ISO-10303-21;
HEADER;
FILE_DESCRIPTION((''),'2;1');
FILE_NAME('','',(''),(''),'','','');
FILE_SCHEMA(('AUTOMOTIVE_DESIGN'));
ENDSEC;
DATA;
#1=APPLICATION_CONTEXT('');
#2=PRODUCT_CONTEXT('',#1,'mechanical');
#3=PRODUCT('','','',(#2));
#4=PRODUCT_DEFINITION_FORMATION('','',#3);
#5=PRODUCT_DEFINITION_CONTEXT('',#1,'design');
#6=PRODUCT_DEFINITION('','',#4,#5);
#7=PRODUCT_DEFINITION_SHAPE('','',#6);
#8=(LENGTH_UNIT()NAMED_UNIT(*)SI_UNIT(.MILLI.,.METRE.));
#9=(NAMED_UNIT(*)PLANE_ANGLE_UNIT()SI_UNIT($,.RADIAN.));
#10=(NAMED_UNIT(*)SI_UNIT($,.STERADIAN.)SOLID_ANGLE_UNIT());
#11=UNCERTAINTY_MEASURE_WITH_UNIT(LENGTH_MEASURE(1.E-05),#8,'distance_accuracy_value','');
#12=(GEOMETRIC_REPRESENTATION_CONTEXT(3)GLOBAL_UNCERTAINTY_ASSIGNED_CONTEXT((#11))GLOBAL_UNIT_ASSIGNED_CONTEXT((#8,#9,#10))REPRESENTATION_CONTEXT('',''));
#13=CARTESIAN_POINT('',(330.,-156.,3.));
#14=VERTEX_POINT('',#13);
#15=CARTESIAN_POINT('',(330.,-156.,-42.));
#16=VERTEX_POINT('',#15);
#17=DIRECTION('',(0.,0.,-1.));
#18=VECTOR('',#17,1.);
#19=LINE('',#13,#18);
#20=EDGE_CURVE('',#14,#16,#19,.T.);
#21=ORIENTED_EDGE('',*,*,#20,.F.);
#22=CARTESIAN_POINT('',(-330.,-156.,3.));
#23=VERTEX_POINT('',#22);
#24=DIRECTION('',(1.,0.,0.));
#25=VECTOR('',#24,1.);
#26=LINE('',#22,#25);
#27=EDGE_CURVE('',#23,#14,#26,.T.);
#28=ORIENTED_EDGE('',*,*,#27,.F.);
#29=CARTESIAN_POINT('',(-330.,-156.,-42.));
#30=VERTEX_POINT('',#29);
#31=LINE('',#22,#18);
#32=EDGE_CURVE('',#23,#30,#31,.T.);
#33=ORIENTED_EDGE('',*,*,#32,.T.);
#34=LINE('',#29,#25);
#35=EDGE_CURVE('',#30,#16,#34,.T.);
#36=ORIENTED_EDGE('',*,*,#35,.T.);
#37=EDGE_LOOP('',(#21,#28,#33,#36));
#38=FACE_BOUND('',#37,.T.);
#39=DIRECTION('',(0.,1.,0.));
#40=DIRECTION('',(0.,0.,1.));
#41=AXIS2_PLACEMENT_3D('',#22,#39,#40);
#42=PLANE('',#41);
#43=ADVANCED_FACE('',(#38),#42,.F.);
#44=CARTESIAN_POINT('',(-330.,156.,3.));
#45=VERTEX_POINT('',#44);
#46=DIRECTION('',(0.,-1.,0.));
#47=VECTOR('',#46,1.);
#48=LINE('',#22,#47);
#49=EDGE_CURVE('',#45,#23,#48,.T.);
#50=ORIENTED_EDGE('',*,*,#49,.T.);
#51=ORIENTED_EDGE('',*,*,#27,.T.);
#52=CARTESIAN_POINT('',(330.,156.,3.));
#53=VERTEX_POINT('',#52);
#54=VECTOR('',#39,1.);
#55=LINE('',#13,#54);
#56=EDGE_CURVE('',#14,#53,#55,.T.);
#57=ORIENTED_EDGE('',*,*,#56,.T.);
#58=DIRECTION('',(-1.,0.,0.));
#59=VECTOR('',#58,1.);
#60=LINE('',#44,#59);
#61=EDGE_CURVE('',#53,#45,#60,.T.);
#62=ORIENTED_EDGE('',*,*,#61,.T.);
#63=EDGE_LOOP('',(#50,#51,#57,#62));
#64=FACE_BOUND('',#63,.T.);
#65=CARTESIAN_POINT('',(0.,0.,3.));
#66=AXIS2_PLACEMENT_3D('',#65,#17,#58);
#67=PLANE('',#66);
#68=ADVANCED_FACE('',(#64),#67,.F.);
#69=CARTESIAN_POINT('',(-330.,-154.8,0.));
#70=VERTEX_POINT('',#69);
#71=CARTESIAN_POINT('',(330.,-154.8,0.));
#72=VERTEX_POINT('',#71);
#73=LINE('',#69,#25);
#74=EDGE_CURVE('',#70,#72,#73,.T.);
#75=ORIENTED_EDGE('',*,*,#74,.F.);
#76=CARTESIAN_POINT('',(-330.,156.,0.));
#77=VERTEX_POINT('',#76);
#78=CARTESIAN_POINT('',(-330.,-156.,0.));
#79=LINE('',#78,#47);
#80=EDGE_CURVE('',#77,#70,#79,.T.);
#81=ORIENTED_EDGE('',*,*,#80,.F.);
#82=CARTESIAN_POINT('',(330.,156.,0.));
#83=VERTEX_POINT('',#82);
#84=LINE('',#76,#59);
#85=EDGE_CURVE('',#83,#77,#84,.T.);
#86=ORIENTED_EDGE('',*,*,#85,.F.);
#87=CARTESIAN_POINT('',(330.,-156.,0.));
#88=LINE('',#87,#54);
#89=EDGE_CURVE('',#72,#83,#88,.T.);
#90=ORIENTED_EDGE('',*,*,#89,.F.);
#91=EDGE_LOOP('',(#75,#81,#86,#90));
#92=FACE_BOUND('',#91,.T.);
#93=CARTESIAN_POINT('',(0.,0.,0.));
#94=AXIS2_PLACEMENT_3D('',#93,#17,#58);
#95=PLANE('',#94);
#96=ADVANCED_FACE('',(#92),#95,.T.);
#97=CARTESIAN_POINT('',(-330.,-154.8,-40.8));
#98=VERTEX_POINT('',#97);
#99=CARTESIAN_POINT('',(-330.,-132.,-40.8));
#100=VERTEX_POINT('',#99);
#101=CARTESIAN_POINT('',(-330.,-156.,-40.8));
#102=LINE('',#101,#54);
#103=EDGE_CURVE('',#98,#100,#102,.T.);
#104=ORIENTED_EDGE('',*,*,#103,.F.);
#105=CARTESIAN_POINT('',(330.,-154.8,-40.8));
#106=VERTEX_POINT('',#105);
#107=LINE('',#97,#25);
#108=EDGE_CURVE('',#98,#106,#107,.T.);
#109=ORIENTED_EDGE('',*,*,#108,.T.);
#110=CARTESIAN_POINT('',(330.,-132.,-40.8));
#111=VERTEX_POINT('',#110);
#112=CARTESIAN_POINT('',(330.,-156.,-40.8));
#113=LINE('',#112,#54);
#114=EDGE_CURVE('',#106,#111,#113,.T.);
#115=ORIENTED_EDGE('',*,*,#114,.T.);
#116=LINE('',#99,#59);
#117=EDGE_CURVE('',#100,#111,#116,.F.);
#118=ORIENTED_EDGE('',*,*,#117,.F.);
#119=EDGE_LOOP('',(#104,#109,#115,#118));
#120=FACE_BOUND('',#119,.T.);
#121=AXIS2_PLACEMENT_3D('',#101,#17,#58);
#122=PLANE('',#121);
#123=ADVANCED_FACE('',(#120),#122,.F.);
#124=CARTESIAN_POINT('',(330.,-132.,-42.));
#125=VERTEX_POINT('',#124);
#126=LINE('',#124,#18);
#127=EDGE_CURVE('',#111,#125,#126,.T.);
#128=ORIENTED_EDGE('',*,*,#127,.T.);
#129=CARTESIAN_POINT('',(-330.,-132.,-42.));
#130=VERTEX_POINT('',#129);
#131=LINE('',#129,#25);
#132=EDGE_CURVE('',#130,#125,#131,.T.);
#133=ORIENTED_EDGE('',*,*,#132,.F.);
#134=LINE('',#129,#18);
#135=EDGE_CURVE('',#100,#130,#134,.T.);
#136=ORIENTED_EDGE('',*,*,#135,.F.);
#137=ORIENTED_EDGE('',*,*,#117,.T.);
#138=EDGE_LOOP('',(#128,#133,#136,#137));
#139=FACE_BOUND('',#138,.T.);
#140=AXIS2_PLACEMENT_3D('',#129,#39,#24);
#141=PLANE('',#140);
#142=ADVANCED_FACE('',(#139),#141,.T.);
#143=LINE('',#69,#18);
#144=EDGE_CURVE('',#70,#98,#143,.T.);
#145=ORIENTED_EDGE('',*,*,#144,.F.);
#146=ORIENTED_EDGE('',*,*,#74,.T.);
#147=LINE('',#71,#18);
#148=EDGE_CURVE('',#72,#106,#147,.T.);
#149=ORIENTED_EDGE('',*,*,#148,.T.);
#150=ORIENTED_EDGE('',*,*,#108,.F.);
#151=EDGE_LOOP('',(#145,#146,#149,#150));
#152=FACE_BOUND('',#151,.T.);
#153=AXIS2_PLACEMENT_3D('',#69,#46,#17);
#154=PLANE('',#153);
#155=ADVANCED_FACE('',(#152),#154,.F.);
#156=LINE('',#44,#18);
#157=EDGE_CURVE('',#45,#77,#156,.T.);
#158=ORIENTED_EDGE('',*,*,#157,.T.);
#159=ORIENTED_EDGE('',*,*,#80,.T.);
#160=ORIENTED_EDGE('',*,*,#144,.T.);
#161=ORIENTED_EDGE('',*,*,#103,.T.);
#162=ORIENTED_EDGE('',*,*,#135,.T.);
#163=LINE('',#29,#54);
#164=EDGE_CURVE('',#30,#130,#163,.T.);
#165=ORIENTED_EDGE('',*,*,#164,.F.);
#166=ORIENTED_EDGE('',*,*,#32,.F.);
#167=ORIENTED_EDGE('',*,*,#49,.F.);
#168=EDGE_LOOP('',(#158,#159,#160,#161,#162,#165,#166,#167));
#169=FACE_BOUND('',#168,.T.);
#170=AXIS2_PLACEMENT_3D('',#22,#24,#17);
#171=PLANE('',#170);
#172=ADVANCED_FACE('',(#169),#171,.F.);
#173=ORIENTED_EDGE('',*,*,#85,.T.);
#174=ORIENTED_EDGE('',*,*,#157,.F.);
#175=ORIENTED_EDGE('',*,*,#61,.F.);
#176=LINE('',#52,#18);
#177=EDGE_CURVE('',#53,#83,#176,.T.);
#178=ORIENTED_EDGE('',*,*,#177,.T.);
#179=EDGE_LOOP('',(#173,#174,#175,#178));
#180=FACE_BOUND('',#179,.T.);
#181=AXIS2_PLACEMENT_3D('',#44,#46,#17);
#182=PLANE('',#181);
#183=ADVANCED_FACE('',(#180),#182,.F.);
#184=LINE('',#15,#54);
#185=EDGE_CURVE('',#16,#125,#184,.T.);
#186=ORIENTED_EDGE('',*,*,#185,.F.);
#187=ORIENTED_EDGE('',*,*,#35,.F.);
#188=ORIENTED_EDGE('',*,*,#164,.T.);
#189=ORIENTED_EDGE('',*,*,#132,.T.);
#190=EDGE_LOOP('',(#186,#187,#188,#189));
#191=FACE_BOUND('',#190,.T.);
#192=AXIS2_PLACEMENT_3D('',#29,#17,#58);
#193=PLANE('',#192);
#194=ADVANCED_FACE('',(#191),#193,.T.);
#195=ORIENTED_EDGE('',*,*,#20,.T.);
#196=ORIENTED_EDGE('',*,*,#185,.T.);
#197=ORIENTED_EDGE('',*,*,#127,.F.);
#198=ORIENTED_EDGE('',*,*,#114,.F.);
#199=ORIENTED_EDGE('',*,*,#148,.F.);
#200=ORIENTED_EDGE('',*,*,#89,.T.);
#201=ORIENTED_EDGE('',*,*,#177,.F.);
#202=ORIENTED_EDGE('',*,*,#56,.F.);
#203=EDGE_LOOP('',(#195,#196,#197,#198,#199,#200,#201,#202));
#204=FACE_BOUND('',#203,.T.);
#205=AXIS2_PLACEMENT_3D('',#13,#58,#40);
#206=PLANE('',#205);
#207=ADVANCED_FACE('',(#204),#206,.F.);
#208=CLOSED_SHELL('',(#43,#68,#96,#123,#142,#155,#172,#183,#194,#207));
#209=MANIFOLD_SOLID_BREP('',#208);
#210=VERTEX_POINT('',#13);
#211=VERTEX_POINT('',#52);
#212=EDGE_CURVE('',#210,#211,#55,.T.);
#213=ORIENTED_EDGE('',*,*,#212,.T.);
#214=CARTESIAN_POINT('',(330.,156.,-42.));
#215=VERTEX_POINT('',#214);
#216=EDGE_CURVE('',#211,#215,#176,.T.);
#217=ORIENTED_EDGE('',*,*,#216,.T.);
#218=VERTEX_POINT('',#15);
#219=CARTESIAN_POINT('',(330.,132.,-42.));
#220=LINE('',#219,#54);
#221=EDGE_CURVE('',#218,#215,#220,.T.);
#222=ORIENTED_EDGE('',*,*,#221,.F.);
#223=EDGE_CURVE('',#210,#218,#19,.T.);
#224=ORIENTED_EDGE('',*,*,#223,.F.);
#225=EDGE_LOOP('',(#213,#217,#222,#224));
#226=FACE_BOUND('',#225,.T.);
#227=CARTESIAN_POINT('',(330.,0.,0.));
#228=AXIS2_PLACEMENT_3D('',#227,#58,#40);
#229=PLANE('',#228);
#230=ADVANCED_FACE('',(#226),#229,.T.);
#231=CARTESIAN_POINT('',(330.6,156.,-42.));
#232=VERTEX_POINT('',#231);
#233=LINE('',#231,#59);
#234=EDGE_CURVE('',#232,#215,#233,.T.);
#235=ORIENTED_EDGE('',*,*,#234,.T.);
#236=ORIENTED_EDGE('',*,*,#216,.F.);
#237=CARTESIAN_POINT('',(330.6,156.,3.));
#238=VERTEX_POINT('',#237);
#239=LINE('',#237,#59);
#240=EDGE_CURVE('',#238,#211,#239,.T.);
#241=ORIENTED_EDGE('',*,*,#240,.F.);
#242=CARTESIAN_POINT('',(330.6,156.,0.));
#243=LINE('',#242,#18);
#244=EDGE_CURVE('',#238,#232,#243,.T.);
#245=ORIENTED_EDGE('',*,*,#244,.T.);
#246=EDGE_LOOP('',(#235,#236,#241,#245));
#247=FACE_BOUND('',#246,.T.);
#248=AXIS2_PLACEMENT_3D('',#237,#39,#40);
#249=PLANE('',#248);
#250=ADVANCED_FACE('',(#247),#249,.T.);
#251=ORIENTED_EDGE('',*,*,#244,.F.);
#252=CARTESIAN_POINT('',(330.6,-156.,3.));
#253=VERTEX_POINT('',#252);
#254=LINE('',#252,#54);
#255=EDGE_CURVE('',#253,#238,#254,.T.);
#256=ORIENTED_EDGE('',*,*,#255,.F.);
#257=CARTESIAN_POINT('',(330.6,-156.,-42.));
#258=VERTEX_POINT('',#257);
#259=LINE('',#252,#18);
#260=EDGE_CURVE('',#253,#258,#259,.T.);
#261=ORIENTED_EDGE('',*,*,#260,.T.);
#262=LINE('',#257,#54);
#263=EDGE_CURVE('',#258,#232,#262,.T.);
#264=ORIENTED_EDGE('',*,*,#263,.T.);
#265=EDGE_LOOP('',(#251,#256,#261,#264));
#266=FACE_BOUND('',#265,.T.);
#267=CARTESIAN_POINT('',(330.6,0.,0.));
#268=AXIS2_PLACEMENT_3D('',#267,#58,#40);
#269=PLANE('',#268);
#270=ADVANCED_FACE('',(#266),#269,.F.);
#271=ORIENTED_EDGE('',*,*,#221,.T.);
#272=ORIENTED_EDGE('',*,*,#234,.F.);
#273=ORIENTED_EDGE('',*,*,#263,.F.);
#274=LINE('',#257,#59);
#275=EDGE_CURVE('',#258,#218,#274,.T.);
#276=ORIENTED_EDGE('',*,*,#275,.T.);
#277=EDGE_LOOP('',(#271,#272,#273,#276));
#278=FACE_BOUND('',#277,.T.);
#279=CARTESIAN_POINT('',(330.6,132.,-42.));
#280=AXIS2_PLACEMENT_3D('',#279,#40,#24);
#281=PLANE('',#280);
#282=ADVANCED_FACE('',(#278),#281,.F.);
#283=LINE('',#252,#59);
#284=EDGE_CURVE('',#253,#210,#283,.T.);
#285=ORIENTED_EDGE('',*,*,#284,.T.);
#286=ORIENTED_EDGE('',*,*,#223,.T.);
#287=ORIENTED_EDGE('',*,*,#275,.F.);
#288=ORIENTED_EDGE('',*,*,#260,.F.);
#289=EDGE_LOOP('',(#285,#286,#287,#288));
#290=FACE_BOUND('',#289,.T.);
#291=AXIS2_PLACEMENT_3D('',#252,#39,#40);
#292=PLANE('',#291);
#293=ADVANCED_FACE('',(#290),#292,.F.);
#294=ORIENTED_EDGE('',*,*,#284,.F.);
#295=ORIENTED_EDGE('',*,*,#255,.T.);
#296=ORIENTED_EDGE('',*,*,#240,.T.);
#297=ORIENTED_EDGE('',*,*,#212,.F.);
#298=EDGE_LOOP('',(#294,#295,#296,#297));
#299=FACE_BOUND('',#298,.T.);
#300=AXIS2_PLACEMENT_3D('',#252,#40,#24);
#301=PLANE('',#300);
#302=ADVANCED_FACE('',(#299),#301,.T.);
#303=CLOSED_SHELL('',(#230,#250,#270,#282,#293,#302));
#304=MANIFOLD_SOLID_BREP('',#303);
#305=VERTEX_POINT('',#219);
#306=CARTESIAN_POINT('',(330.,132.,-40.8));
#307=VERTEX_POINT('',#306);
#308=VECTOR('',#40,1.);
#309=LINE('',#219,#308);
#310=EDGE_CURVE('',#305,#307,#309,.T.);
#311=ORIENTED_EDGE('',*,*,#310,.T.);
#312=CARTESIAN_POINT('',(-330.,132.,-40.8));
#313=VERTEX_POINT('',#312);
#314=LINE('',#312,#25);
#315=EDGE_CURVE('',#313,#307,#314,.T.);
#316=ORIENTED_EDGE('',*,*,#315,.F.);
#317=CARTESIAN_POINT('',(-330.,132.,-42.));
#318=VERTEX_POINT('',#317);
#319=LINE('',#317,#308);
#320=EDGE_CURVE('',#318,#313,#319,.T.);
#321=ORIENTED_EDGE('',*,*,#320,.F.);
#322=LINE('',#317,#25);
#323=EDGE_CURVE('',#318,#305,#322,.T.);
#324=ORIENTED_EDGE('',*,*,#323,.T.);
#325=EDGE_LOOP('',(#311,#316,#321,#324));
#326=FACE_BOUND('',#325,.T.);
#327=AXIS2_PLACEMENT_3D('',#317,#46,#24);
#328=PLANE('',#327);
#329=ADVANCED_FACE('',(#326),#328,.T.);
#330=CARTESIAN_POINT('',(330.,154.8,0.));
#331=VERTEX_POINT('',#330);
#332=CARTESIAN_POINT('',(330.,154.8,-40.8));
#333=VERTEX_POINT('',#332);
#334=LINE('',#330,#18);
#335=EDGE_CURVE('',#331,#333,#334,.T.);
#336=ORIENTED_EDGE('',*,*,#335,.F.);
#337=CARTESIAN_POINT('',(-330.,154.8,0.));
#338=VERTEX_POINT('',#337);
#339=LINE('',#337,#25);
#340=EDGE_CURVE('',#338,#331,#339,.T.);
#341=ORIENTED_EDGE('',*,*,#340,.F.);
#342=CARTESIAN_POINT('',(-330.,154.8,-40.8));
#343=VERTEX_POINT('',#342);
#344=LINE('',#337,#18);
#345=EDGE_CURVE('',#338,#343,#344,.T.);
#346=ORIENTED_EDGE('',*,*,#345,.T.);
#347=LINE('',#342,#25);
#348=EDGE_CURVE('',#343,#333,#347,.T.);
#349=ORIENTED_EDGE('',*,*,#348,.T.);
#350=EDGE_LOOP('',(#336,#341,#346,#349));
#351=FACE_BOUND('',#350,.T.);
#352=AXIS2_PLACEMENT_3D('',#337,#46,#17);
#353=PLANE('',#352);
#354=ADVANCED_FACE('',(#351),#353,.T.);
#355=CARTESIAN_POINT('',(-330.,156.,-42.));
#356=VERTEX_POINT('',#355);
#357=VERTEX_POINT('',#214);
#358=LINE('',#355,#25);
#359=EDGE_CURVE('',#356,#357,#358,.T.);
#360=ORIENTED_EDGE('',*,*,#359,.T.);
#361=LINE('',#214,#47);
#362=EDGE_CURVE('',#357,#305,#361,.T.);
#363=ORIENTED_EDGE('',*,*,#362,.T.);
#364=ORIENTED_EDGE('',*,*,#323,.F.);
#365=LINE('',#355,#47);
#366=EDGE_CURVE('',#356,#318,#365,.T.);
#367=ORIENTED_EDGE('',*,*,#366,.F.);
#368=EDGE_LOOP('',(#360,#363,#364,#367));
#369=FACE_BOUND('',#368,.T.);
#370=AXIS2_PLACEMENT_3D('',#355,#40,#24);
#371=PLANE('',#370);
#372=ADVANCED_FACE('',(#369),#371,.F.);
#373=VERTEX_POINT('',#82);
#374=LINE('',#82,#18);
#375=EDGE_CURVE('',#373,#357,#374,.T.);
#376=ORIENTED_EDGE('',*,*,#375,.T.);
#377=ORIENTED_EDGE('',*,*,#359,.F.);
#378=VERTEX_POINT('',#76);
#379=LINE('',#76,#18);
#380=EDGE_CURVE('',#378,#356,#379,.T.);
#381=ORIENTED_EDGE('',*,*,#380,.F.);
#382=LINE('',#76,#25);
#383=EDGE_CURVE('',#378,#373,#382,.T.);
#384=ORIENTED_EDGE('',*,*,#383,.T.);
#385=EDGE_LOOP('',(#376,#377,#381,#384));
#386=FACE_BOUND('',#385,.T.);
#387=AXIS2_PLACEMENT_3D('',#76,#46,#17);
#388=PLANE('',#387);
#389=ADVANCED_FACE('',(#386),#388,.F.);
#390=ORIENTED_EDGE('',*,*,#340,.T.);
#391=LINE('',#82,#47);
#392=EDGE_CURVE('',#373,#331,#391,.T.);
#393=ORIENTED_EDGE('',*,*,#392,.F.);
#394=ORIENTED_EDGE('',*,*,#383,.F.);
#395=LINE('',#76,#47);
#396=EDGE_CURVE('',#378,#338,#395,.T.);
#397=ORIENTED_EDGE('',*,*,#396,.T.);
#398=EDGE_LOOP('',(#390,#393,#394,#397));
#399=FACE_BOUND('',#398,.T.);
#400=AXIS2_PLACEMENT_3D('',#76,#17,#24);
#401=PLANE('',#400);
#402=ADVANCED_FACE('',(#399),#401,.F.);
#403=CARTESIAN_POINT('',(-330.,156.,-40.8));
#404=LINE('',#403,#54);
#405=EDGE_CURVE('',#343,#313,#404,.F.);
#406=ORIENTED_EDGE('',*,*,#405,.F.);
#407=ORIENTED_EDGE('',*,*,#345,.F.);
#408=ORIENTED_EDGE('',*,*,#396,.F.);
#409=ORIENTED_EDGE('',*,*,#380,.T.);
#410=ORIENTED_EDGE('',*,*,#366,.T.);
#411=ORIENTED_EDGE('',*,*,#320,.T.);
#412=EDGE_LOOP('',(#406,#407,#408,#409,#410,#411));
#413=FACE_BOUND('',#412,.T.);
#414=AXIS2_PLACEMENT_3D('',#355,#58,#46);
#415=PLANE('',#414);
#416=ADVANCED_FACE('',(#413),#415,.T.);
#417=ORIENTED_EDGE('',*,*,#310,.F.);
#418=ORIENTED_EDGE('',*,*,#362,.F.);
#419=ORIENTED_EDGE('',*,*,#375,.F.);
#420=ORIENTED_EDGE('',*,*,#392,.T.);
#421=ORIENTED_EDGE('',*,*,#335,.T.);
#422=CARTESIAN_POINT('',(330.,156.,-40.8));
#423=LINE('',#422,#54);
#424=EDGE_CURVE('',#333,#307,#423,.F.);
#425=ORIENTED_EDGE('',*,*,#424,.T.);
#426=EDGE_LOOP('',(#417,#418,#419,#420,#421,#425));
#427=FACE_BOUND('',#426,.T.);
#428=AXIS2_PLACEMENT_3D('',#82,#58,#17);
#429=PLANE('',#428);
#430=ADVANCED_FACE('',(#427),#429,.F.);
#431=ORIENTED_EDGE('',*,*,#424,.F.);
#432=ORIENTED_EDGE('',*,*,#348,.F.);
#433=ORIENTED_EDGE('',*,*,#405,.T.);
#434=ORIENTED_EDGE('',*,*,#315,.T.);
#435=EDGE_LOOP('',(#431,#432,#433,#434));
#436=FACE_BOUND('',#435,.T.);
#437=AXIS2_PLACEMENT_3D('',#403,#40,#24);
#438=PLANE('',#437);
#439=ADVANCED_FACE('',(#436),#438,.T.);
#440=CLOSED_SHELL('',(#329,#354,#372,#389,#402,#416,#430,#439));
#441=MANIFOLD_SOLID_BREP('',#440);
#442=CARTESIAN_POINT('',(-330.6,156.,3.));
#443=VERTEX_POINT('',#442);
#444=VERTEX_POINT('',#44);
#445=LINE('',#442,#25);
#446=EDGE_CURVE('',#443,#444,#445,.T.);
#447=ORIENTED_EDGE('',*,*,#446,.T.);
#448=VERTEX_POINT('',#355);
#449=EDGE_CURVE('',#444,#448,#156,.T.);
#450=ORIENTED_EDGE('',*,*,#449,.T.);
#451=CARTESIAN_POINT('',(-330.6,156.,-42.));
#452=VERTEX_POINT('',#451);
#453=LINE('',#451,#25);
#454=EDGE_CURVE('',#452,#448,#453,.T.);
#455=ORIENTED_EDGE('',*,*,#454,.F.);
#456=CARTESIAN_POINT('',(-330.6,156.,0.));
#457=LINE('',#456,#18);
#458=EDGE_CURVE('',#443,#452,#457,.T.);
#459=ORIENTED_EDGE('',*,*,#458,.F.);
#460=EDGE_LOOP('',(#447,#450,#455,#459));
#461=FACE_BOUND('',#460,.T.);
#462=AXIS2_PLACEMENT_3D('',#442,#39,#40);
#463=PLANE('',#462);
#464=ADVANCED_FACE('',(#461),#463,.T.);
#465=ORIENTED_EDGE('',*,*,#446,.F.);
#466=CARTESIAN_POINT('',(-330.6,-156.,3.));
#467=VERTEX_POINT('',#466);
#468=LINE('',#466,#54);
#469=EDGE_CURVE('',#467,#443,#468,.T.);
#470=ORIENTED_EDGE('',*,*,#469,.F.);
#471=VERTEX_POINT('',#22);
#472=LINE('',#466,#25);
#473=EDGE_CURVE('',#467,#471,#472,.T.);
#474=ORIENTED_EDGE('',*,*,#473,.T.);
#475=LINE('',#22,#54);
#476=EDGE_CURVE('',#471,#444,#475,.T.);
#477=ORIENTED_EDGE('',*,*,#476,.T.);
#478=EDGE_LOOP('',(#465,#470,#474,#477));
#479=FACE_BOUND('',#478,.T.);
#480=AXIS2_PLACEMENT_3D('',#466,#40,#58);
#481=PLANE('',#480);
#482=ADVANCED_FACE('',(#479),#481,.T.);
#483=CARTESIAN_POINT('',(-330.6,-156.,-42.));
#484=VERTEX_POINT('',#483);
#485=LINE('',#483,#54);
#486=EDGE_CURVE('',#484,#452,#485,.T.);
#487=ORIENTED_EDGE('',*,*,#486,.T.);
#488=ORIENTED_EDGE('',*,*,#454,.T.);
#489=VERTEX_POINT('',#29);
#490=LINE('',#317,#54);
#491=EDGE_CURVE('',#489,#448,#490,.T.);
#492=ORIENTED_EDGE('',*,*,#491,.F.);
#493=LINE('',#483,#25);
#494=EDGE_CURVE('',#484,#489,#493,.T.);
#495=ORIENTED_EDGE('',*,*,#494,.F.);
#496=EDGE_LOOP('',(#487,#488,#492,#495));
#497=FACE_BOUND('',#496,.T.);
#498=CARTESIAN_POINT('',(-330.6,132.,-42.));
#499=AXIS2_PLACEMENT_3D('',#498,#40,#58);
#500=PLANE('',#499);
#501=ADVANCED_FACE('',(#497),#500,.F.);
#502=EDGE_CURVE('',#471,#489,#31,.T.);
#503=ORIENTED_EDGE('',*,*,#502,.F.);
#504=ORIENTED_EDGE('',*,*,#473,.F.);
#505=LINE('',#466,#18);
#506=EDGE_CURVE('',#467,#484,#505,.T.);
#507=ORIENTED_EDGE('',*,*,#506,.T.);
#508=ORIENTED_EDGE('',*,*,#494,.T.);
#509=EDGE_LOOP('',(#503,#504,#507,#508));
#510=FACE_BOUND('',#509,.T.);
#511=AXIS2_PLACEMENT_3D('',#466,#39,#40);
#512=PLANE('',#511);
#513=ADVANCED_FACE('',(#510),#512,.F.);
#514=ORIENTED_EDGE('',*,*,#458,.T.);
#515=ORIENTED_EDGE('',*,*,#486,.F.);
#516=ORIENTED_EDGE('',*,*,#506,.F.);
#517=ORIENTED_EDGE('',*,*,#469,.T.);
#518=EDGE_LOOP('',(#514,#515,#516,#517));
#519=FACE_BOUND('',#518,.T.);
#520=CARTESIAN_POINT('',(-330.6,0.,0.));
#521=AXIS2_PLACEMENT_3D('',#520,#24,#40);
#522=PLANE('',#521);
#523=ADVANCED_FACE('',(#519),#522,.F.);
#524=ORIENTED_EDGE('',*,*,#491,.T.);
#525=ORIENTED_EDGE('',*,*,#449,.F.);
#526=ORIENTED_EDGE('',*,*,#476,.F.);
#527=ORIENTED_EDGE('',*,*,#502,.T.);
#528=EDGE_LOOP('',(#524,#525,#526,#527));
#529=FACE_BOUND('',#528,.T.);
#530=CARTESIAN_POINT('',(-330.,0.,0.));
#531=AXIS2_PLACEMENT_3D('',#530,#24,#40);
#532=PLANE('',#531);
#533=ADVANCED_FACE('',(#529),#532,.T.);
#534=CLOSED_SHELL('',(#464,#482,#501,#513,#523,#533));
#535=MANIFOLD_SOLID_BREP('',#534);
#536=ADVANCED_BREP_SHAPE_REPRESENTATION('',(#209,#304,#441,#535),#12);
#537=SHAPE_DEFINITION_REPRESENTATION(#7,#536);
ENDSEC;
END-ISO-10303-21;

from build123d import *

# Parameters (mm, degrees)
SKETCH_1_W            = 1100
SKETCH_1_H            = 520
EXTRUDE_1_DEPTH       = 5
THICKEN_START         = -550
THICKEN_1_DEPTH       = 1100
THICKEN_START_2       = -260
THICKEN_2_OUTLINE_W   = 1100
THICKEN_2_OUTLINE_H   = 70
THICKEN_2_DEPTH       = 2
THICKEN_START_3       = -258
THICKEN_2_2_OUTLINE_W = 1100
THICKEN_2_2_OUTLINE_H = 2
THICKEN_2_2_DEPTH     = 38
EXTRUDE_2_DEPTH       = 1
SCALE_1_SCALE         = 0.6


# Read off the part's stored shape, not the designer's step: 加厚1, 加厚2
with BuildPart() as part:
    # 草图1 → 凸台-拉伸1 (new body)
    with BuildSketch(Plane.XY):
        Rectangle(SKETCH_1_W, SKETCH_1_H)
    extrude(amount=EXTRUDE_1_DEPTH)

    # 加厚2 outline → 加厚2 (add)
    with BuildSketch(Plane(origin=(0, 0, 0), x_dir=(1, 0, 0), z_dir=(0, 1, 0)).offset(THICKEN_START_2)):
        with Locations((0, 35)):
            Rectangle(THICKEN_2_OUTLINE_W, THICKEN_2_OUTLINE_H)
    extrude(amount=THICKEN_2_DEPTH)

    # Thicken 2 2 outline → Thicken 2 2 (add)
    with BuildSketch(Plane(origin=(0, 0, 0), x_dir=(1, 0, 0), z_dir=(0, 1, 0)).offset(THICKEN_START_3)):
        with Locations((0, 69)):
            Rectangle(THICKEN_2_2_OUTLINE_W, THICKEN_2_2_OUTLINE_H)
    extrude(amount=THICKEN_2_2_DEPTH)


with BuildPart() as body_2:
    # 加厚1 outline → 加厚1 (new body)
    with BuildSketch(Plane.YZ.offset(THICKEN_START)):
        Polygon((260, -70), (260, 0), (258, 0), (258, -68), (220, -68), (220, -70), align=None)
    extrude(amount=THICKEN_1_DEPTH)


with BuildPart() as body_3:
    # 草图4 → 凸台-拉伸2 (new body)
    with BuildSketch(Plane(origin=(550, 0, 0), x_dir=(0, 0, -1), z_dir=(1, 0, 0))):
        Polygon((0, 260), (70, 260), (70, 220), (70, -220), (70, -260), (-5, -260), (-5, 260), align=None)
    extrude(amount=EXTRUDE_2_DEPTH)


with BuildPart() as body_4:
    # 镜向2: mirrored copy
    add(body_3.part.mirror(Plane(origin=(0, 0, 0), x_dir=(0, 0, 1), z_dir=(1, 0, 0))))


with BuildPart() as body_2_1:
    # 缩放比例1: scaled about (0, 0, 0)
    add(body_2.part.scale(SCALE_1_SCALE))


with BuildPart() as body_3_1:
    # 缩放比例1: scaled about (0, 0, 0)
    add(body_3.part.scale(SCALE_1_SCALE))


with BuildPart() as part_1:
    # 缩放比例1: scaled about (0, 0, 0)
    add(part.part.scale(SCALE_1_SCALE))


with BuildPart() as body_4_1:
    # 缩放比例1: scaled about (0, 0, 0)
    add(body_4.part.scale(SCALE_1_SCALE))


solid = Compound([body_2_1.part, body_3_1.part, part_1.part, body_4_1.part])
